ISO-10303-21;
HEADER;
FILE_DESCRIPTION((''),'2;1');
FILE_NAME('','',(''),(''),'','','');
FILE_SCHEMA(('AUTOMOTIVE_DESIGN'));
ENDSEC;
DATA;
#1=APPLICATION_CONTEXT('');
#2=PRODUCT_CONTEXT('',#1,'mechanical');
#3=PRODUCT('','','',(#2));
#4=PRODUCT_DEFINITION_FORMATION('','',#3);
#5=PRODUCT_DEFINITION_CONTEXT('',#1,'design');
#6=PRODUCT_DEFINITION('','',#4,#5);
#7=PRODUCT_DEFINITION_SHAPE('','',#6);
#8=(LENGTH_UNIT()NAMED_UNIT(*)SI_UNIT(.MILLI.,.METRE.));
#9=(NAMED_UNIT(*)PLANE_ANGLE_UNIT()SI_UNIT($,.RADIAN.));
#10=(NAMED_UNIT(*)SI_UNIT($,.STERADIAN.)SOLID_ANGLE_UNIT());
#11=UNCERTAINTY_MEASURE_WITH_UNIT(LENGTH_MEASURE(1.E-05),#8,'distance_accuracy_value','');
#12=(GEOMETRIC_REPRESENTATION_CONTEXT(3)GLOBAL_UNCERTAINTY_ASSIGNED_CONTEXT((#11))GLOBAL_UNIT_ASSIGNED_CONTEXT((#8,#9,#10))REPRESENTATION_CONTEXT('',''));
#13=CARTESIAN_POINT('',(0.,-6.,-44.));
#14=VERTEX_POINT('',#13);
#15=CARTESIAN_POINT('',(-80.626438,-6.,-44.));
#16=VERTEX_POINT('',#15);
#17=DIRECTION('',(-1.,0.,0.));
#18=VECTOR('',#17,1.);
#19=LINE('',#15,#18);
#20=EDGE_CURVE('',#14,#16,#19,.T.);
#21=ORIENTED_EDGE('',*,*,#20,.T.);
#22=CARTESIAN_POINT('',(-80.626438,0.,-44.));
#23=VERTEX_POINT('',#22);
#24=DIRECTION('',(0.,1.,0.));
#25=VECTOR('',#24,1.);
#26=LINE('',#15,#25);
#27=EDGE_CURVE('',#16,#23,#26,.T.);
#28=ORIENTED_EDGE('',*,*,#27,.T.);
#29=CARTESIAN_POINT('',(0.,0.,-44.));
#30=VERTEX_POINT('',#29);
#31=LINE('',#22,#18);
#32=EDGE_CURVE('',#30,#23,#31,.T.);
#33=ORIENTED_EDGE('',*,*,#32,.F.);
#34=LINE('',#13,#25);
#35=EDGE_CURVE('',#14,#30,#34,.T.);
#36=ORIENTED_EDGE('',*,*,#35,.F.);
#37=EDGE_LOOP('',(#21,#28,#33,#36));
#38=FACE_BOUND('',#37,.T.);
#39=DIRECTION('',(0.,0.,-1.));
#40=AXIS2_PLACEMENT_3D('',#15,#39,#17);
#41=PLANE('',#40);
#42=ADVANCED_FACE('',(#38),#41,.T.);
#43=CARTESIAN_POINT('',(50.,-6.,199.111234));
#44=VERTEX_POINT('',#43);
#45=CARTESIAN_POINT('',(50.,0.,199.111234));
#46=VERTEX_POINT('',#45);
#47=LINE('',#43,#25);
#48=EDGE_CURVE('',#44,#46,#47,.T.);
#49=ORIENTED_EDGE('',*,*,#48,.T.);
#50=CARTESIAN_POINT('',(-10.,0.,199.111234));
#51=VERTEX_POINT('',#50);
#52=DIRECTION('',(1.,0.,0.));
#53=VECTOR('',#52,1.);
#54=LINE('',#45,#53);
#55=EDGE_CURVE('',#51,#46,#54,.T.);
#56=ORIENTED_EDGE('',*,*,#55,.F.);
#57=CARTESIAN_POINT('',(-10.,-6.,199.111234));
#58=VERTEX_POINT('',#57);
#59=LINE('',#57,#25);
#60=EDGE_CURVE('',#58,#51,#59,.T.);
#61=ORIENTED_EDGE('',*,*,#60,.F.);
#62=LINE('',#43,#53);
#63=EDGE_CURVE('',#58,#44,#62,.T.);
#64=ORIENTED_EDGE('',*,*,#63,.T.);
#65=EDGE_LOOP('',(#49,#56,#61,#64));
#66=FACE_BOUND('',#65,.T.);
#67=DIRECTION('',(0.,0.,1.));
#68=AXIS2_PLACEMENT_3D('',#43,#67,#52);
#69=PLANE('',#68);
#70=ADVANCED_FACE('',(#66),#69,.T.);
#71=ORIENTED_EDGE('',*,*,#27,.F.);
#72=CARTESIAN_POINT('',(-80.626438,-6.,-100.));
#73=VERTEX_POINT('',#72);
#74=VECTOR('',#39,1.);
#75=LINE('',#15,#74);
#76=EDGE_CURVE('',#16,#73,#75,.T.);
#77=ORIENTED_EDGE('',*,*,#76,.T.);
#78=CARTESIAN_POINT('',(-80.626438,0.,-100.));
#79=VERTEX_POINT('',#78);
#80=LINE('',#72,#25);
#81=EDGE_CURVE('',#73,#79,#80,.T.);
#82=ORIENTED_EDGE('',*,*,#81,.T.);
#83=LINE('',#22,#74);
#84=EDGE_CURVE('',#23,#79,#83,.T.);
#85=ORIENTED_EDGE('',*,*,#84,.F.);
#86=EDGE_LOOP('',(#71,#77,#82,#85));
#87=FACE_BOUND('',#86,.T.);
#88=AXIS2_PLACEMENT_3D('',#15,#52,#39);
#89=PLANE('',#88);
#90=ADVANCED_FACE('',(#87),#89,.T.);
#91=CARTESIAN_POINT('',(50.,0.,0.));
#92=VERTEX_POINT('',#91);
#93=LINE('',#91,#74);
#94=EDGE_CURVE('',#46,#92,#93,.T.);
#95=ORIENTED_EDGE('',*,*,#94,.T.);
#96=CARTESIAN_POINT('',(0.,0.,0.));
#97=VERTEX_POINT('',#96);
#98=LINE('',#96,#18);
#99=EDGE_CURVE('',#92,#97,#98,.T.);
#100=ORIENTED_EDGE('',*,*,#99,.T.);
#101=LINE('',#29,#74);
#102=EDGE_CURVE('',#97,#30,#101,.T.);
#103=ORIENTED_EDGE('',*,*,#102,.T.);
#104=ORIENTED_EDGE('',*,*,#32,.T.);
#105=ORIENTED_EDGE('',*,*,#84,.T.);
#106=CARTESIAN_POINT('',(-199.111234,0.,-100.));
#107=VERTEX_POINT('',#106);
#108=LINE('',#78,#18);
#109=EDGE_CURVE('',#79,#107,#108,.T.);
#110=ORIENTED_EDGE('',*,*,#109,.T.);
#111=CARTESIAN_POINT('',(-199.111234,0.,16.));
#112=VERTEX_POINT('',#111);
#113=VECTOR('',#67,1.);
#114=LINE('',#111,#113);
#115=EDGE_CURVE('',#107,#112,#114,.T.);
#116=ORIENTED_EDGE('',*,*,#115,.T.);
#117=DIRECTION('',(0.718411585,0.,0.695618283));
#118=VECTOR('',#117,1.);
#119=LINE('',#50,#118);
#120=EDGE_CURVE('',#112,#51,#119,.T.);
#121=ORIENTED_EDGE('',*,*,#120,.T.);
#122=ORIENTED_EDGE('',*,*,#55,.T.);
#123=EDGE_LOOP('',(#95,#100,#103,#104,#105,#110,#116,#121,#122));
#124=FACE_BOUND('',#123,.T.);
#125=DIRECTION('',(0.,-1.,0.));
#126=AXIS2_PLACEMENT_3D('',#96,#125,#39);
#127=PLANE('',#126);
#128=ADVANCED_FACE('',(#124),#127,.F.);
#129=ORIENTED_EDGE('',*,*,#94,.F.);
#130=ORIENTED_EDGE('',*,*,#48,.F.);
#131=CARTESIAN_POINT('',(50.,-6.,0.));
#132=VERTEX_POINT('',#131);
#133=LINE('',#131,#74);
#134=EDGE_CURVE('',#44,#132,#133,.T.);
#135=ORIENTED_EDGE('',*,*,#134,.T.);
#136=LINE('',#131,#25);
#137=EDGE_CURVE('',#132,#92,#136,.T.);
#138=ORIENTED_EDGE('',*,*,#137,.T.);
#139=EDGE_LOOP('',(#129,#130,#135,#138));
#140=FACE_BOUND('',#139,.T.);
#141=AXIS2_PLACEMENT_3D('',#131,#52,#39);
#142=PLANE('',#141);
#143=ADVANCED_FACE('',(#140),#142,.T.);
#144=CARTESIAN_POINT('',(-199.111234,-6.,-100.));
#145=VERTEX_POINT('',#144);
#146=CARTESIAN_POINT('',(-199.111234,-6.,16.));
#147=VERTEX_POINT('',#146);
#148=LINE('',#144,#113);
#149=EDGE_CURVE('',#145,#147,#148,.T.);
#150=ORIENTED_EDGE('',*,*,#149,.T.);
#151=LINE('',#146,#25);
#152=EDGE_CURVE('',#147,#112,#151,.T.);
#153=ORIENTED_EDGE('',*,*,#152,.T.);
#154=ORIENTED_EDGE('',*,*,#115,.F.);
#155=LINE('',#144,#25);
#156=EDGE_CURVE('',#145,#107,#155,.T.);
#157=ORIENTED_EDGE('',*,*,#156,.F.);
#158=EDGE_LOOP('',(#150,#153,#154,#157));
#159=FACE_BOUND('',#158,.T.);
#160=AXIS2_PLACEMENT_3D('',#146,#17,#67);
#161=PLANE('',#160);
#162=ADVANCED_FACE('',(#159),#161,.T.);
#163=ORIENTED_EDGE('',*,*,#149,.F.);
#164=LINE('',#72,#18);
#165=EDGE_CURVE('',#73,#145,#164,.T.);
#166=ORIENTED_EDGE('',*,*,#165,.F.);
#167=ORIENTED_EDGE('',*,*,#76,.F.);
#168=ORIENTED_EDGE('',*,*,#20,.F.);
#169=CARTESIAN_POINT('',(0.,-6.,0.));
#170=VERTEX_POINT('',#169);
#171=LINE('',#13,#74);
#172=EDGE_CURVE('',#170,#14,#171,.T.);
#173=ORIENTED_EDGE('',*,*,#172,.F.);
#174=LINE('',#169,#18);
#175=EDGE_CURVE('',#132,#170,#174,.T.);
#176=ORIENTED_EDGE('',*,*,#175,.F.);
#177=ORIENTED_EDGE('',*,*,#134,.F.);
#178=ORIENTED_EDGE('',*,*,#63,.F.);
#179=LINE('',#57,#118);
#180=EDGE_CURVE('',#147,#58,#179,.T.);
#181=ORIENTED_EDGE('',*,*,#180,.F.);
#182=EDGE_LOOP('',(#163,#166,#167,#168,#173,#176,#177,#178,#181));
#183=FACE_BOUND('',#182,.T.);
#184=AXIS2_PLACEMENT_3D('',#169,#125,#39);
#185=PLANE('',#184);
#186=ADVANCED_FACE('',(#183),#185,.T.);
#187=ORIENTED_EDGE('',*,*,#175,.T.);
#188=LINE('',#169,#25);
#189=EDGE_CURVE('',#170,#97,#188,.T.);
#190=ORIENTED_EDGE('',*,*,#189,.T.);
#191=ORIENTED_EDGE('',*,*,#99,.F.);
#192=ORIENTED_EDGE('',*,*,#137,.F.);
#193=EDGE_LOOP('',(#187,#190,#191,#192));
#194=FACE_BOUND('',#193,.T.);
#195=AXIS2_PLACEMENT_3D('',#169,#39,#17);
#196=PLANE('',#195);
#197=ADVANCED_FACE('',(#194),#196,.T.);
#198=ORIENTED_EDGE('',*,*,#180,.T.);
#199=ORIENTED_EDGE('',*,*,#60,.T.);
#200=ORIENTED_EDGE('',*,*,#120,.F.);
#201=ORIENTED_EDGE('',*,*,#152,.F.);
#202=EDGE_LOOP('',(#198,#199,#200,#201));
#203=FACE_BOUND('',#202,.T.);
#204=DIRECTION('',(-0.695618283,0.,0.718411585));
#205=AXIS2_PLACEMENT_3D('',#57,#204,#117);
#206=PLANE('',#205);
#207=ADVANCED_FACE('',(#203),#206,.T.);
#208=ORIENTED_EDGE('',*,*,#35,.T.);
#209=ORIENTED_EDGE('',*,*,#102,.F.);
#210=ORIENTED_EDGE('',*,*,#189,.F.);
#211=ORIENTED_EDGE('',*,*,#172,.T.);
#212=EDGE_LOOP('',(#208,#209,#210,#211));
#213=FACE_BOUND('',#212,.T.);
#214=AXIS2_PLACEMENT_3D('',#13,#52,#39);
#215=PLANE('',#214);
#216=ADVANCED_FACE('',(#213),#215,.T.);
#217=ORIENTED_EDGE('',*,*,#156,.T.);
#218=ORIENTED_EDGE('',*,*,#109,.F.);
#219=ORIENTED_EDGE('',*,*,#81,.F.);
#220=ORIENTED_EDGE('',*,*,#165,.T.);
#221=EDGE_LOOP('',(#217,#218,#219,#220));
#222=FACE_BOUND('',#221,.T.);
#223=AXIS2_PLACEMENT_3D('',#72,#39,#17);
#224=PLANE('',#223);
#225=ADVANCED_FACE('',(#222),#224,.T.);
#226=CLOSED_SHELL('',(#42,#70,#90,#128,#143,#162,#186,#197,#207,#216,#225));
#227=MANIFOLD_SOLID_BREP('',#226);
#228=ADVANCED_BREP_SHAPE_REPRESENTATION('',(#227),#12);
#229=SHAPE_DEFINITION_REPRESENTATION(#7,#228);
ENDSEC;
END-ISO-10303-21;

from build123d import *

# Parameters (mm, degrees)
SM_BASE_FLANGE_1_DEPTH = 6


# Sheet-metal steps are written as plain solids
with BuildPart() as part:
    # Sketch 1 → Базовая кромка1 (new body)
    with BuildSketch(Plane(origin=(0, 0, 0), x_dir=(1, 0, 0), z_dir=(0, 1, 0))):
        Polygon((0, 44), (0, 0), (50, 0), (50, -199.111234032), (-10, -199.111234032), (-199.111234032, -16), (-199.111234032, 44), (-199.111234032, 100), (-80.626438318, 100), (-80.626438318, 44), align=None)
    extrude(amount=-SM_BASE_FLANGE_1_DEPTH)


solid = part.part
